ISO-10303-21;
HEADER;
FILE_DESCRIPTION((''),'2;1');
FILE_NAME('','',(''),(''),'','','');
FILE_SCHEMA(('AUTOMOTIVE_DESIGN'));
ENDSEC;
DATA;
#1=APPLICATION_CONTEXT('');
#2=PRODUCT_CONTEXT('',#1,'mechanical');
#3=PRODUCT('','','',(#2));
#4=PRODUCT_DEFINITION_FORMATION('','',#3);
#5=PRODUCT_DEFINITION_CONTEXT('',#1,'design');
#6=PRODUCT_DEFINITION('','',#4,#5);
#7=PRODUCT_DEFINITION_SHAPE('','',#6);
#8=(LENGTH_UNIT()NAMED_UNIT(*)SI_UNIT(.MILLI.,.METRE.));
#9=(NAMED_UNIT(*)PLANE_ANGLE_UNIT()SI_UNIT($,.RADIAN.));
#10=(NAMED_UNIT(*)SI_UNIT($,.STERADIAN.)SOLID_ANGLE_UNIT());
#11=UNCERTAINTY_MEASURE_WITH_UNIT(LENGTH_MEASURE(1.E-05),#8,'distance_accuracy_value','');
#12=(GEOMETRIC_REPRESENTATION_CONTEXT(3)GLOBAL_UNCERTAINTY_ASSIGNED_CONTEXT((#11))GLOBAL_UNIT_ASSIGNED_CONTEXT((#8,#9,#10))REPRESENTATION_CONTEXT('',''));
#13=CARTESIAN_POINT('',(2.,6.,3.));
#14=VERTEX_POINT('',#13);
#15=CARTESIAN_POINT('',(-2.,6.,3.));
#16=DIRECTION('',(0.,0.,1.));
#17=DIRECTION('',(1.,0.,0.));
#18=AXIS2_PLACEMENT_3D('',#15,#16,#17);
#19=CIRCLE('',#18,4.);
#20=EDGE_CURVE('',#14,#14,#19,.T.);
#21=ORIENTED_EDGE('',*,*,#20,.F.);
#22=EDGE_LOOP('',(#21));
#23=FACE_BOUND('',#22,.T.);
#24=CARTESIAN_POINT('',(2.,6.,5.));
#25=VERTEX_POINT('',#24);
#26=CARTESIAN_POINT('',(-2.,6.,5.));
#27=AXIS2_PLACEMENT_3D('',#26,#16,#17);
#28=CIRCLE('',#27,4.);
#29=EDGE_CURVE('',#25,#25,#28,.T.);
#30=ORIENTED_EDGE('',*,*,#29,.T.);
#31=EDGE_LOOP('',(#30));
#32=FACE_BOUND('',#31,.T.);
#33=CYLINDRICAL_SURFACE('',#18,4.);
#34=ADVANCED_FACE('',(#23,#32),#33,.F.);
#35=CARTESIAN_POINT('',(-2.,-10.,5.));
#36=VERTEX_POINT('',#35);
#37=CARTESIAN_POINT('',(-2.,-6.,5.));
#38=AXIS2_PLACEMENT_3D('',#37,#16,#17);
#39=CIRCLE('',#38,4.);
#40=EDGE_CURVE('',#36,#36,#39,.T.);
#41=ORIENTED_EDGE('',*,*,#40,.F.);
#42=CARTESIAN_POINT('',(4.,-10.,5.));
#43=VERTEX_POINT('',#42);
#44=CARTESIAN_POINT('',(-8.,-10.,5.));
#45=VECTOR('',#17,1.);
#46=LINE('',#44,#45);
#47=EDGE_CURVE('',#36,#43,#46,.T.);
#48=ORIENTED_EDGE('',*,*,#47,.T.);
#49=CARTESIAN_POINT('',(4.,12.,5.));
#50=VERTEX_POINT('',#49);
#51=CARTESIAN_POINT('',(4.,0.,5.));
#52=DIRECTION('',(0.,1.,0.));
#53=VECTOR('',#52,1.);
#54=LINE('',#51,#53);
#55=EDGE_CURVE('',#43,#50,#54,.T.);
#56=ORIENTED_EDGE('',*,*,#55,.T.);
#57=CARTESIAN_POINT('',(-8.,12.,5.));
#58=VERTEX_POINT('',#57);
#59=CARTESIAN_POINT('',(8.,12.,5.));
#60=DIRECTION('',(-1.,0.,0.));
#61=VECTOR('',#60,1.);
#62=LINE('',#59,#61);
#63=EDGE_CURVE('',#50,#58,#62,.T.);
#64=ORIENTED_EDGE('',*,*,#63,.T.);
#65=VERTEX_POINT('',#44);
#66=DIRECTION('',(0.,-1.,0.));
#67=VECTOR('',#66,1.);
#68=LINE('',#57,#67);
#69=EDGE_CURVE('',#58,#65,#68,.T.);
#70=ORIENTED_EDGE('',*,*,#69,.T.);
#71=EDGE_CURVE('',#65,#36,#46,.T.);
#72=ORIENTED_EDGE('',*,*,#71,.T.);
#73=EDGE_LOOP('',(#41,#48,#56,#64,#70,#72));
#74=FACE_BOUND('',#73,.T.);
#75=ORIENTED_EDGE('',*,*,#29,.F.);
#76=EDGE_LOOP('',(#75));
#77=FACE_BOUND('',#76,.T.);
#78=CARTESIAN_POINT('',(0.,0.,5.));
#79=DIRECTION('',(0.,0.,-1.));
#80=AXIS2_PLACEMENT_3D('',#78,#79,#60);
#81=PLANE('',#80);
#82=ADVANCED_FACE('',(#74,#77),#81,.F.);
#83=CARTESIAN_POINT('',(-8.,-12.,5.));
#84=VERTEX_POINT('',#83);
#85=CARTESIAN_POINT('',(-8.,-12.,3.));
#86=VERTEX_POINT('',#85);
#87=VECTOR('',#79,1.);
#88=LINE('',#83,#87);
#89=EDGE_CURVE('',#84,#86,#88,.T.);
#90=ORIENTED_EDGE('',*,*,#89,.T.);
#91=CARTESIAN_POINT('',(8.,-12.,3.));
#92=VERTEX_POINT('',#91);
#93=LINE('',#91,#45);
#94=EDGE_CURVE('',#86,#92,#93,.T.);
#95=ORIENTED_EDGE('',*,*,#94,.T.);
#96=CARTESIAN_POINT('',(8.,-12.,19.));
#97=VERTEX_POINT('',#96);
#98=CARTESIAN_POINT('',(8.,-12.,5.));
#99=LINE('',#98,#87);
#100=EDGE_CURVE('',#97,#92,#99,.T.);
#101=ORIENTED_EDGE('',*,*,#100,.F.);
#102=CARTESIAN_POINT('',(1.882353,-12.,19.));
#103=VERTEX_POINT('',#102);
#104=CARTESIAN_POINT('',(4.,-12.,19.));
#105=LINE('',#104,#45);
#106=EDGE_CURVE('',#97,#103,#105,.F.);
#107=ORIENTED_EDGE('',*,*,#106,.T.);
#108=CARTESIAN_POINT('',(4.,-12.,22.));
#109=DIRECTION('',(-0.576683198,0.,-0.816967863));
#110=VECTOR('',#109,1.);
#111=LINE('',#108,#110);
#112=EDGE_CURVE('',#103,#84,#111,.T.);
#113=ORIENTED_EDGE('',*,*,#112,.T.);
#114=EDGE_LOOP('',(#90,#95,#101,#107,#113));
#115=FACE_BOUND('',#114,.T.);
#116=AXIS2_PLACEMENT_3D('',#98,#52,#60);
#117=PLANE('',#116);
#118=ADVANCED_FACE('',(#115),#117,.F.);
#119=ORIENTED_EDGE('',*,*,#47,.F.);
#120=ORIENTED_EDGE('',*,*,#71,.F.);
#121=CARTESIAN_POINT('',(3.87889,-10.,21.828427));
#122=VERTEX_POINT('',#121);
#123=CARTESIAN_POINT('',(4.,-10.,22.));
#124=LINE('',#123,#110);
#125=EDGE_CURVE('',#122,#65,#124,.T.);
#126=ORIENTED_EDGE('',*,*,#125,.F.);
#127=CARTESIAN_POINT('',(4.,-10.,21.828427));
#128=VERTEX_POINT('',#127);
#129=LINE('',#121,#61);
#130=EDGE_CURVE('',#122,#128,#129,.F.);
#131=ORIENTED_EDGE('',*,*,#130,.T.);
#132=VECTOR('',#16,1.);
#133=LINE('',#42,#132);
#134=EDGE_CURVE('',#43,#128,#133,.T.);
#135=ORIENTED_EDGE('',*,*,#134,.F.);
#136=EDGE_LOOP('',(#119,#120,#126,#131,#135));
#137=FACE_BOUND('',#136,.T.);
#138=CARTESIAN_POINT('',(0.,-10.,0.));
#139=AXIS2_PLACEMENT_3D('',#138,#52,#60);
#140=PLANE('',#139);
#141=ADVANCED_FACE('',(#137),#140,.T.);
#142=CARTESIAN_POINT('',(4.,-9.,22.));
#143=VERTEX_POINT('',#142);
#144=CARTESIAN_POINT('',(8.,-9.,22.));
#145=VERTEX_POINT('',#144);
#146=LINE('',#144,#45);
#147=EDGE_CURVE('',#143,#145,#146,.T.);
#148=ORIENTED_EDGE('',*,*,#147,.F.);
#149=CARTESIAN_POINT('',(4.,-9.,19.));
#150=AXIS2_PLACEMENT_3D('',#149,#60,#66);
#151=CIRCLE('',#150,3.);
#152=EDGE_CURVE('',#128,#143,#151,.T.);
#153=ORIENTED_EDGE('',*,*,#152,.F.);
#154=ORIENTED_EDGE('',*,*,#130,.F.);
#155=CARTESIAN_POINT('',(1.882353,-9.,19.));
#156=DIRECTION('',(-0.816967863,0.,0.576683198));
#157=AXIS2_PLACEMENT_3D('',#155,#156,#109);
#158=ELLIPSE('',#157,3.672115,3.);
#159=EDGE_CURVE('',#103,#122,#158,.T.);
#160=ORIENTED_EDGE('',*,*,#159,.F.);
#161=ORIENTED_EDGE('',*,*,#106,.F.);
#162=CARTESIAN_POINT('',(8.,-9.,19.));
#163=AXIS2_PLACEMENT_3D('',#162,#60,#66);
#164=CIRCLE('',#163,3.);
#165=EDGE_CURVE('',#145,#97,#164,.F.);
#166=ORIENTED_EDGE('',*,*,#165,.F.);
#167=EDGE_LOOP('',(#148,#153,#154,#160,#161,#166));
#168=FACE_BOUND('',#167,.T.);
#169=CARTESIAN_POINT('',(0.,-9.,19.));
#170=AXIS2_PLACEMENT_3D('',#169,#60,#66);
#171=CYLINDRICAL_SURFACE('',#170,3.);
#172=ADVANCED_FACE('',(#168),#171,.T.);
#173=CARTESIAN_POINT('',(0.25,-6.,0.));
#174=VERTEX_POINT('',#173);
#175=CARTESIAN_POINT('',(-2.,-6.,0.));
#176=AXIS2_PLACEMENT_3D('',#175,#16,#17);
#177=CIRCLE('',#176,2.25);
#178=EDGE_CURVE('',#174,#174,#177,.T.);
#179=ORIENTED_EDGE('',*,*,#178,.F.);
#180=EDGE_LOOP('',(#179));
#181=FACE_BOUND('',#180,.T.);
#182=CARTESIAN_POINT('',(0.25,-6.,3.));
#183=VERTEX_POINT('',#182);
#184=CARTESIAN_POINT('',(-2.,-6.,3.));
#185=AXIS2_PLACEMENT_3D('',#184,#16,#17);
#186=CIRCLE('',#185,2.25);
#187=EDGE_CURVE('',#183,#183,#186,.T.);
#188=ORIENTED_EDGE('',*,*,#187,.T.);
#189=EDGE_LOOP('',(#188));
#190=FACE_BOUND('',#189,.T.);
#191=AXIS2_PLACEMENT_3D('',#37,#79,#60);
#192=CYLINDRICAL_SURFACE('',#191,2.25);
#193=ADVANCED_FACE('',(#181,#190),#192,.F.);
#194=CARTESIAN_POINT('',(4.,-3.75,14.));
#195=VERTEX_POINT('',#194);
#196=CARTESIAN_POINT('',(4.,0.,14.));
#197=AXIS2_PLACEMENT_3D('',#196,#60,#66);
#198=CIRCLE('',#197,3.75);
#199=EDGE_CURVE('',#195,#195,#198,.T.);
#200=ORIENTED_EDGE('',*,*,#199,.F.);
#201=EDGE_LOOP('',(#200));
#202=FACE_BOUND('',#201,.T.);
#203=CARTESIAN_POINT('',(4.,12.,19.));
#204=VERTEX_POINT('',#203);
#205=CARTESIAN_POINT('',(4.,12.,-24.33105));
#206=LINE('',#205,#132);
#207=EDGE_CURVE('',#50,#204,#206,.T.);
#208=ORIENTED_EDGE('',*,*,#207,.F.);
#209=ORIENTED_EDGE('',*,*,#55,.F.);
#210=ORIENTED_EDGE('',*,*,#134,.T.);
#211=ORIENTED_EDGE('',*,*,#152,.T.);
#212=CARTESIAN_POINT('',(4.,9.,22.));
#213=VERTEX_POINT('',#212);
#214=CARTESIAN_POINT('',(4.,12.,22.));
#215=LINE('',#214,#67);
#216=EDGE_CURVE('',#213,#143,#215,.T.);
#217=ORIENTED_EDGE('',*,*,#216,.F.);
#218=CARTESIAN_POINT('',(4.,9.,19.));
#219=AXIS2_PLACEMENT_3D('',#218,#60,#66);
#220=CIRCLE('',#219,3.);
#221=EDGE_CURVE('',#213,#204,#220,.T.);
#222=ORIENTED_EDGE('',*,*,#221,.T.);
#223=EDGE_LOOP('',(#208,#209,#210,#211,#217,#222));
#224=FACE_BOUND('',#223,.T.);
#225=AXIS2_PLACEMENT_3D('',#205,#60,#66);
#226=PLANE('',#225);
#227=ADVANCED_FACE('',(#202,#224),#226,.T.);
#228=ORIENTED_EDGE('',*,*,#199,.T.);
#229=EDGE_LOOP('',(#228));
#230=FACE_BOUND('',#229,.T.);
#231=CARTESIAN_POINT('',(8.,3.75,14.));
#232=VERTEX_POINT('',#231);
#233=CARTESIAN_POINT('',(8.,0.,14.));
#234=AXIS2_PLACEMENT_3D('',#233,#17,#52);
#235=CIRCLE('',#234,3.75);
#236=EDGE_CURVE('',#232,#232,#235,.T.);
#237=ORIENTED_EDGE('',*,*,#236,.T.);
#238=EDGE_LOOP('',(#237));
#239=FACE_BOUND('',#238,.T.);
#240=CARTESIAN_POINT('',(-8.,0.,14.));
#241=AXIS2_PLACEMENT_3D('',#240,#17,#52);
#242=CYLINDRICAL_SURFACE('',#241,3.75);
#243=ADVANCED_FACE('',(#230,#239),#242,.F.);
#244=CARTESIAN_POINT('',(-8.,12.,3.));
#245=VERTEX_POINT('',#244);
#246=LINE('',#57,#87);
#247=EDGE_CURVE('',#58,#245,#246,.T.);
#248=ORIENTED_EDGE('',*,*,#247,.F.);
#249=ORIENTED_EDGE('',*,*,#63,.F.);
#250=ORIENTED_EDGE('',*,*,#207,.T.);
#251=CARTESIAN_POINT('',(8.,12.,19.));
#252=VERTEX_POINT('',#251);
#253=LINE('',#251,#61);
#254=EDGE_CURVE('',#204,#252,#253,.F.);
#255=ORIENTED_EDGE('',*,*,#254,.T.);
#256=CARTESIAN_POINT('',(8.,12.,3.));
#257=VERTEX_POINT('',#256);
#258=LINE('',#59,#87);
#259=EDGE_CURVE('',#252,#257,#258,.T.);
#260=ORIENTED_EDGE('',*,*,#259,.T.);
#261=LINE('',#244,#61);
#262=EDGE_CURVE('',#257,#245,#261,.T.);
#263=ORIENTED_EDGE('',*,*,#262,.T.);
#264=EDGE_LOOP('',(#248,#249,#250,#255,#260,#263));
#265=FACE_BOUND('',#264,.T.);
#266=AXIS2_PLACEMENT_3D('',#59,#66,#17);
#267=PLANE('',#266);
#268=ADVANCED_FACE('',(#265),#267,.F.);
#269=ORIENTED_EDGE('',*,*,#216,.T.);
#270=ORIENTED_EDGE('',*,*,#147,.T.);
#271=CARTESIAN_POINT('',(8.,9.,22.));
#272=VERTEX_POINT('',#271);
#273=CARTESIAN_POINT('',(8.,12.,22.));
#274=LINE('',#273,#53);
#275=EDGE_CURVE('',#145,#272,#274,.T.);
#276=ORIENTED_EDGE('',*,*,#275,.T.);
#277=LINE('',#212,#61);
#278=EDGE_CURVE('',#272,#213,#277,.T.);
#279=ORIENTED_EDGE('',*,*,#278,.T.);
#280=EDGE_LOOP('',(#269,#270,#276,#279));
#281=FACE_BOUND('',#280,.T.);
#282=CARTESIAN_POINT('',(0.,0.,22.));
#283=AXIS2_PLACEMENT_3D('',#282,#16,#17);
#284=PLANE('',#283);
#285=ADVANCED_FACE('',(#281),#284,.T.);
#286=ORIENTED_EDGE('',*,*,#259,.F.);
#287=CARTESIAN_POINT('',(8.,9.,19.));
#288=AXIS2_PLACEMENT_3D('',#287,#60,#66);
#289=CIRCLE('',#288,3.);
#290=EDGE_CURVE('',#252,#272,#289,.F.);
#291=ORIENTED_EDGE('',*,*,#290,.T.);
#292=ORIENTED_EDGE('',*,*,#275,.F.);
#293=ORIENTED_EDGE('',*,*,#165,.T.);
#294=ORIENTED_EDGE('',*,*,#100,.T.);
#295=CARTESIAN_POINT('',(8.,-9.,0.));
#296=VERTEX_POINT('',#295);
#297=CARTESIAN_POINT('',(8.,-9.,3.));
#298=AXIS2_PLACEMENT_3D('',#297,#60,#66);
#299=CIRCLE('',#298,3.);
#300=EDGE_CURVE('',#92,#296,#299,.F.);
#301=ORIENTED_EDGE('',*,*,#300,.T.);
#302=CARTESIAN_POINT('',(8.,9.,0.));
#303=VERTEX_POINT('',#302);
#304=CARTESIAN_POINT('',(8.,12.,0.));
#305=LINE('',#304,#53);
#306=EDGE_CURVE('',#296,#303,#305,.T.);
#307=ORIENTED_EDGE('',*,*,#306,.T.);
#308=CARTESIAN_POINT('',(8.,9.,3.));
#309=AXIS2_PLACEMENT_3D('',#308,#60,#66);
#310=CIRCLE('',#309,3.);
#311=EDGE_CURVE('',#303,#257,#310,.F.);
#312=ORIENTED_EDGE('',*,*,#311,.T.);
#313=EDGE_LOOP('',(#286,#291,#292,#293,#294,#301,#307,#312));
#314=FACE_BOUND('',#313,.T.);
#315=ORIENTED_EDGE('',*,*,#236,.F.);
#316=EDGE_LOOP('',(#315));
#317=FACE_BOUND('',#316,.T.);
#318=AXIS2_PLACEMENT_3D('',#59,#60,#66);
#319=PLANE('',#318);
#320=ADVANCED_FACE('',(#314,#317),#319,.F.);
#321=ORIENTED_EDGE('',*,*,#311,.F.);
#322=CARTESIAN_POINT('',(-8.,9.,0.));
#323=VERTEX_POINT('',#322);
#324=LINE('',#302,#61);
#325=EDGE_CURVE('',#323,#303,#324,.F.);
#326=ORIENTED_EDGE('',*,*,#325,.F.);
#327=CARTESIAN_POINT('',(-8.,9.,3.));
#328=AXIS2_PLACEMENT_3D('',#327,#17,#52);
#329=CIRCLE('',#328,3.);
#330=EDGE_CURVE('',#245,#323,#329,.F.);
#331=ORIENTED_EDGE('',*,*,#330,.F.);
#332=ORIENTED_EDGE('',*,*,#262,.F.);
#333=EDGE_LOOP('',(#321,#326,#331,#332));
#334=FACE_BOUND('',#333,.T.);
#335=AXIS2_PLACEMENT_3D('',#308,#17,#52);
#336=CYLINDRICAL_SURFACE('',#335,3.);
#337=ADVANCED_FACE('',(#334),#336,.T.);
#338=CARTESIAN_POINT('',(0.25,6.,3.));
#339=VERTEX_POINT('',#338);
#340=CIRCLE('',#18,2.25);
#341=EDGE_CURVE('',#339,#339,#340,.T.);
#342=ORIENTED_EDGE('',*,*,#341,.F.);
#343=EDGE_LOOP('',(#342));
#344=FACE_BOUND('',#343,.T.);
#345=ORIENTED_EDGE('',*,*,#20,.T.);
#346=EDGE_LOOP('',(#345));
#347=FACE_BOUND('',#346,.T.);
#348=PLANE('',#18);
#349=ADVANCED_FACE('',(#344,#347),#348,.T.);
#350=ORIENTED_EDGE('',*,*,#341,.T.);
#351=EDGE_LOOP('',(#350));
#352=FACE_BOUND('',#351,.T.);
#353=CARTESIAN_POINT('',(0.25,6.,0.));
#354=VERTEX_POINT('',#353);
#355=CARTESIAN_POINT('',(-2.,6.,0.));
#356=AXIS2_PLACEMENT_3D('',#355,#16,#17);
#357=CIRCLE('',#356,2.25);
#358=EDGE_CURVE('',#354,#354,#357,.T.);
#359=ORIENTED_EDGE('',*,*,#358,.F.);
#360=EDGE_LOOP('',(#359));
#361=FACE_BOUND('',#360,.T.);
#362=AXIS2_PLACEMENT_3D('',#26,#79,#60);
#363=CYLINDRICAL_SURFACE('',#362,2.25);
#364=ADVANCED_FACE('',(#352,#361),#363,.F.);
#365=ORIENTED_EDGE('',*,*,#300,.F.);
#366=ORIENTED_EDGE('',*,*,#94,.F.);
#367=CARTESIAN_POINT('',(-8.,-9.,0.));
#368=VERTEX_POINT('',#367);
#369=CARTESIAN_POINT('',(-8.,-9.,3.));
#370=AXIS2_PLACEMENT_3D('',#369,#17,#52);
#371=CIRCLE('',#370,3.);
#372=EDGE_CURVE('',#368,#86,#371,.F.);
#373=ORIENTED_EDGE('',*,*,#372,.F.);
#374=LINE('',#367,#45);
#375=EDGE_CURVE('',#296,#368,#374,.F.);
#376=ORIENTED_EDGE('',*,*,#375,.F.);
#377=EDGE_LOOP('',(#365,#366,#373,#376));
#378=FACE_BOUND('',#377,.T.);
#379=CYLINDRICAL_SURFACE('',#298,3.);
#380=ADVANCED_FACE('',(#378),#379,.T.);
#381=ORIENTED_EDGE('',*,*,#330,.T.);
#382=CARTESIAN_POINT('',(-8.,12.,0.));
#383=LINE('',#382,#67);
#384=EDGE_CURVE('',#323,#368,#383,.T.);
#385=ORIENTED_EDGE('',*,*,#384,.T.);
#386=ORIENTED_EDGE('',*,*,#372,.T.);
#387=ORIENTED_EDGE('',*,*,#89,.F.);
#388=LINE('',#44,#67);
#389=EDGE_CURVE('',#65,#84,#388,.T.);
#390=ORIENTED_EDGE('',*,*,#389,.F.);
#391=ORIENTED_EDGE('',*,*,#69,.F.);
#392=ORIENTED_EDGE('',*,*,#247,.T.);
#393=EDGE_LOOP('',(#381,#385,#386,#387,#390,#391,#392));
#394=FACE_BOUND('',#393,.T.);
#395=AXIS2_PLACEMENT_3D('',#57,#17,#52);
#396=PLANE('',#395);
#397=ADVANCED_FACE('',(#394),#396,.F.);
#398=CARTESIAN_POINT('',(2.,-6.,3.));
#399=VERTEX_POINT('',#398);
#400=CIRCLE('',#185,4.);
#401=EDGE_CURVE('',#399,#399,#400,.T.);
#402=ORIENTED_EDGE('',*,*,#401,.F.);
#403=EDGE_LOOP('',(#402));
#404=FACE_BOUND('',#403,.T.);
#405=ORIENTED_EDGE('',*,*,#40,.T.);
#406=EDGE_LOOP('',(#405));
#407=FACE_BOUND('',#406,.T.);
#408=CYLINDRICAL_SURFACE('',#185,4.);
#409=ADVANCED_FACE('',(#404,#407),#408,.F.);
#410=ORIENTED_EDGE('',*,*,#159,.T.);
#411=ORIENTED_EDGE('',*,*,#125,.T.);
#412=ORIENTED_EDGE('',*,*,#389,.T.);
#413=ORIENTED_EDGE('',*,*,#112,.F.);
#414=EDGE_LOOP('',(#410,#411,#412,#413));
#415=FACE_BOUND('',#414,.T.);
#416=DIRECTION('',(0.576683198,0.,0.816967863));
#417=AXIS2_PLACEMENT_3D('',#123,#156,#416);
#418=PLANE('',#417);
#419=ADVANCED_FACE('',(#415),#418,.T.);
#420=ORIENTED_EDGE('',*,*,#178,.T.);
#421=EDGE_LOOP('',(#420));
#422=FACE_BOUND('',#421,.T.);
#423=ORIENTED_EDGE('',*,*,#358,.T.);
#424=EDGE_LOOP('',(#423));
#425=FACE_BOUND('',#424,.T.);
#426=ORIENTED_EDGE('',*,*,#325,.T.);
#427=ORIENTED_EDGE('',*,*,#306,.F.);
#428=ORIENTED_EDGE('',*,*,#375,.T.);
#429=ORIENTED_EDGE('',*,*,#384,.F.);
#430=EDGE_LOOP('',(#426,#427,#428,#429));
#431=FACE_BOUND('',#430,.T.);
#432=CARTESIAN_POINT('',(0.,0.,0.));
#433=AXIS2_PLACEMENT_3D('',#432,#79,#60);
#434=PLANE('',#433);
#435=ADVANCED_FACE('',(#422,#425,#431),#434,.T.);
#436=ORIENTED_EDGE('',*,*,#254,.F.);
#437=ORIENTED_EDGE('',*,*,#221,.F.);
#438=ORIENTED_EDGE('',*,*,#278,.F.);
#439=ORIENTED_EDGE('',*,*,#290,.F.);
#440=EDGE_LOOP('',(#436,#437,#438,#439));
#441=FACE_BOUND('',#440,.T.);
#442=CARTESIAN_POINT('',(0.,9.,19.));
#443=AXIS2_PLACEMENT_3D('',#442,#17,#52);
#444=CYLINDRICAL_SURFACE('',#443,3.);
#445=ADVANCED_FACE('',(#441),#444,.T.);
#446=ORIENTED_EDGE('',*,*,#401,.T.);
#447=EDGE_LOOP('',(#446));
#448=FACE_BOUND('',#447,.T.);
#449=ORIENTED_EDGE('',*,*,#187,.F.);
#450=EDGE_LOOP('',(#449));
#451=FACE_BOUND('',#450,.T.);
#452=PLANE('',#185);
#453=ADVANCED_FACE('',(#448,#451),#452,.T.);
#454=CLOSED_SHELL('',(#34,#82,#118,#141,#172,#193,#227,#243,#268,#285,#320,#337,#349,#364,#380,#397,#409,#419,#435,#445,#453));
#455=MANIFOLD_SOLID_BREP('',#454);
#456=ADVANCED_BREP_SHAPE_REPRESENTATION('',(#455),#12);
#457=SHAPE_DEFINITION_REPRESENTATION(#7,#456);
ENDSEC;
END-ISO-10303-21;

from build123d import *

# Parameters (mm, degrees)
SKETCH1_W                = 16
SKETCH1_H                = 24
SKETCH1_R                = 2.25
BOSS_EXTRUDE1_DEPTH      = 5
BOSS_EXTRUDE2_DEPTH      = 17
BOSS_EXTRUDE2_DEPTH_BACK = 5
SKETCH2_W                = 4
SKETCH2_H                = 24
SKETCH3_R                = 3.75
CUT_EXTRUDE1_DEPTH       = 30.732137495
BOSS_EXTRUDE3_DEPTH      = 2
FILLET1_R                = 3
SKETCH5_R                = 4
CUT_EXTRUDE2_DEPTH       = 2


with BuildPart() as part:
    # Sketch1 → Boss-Extrude1 (new body)
    with BuildSketch(Plane.XY):
        Rectangle(SKETCH1_W, SKETCH1_H)
        with Locations((-2, 6)):
            Circle(SKETCH1_R, mode=Mode.SUBTRACT)
        with Locations((-2, -6)):
            Circle(SKETCH1_R, mode=Mode.SUBTRACT)
    extrude(amount=BOSS_EXTRUDE1_DEPTH)

    # Sketch2 → Boss-Extrude2 (add, two sides: drawn at the far end of the back side and taken through both)
    with BuildSketch(Plane.XY.offset(5).offset(-BOSS_EXTRUDE2_DEPTH_BACK)):
        with Locations((6, 0)):
            Rectangle(SKETCH2_W, SKETCH2_H)
    extrude(amount=BOSS_EXTRUDE2_DEPTH + BOSS_EXTRUDE2_DEPTH_BACK)

    # Sketch3 → Cut-Extrude1 (cut, through all)
    with BuildSketch(Plane(origin=(8, 0, 0), x_dir=(0, 0, -1), z_dir=(1, 0, 0))):
        with Locations(Location((-14, 0, 0), (0, 0, 90))):
            Circle(SKETCH3_R)
    extrude(amount=-CUT_EXTRUDE1_DEPTH, mode=Mode.SUBTRACT)

    # Sketch4 → Boss-Extrude3 (add)
    with BuildSketch(Plane.XZ.offset(12)):
        Polygon((4, 22), (-8, 5), (4, 5), align=None)
    extrude(amount=-BOSS_EXTRUDE3_DEPTH)

    # Fillet1
    # the kernel refuses this fillet: 3 mm, written as the material it takes off along each edge
    with BuildSketch(Plane(origin=(15.5, -12, 22), x_dir=(0, 1, 0), z_dir=(-1, 0, 0))) as fillet1_piece_1:
        with BuildLine():
            CenterArc((FILLET1_R, FILLET1_R), FILLET1_R, 180, 90)
            Line((0, FILLET1_R), (0, 0))
            Line((0, 0), (FILLET1_R, 0))
        make_face()
    extrude(amount=19, mode=Mode.SUBTRACT)
    with BuildSketch(Plane(origin=(-3.5, 12, 22), x_dir=(0, 0, -1), z_dir=(1, 0, 0))) as fillet1_piece_2:
        with BuildLine():
            CenterArc((FILLET1_R, -FILLET1_R), FILLET1_R, 90, 90)
            Line((0, -FILLET1_R), (0, 0))
            Line((0, 0), (FILLET1_R, 0))
        make_face()
    extrude(amount=19, mode=Mode.SUBTRACT)
    with BuildSketch(Plane(origin=(15.5, -12, 0), x_dir=(0, 1, 0), z_dir=(-1, 0, 0)), Plane(origin=(15.5, 12, 0), x_dir=(0, 0, 1), z_dir=(-1, 0, 0))) as fillet1_piece_3:
        with BuildLine():
            CenterArc((FILLET1_R, -FILLET1_R), FILLET1_R, 90, 90)
            Line((0, -FILLET1_R), (0, 0))
            Line((0, 0), (FILLET1_R, 0))
        make_face()
    extrude(amount=31, mode=Mode.SUBTRACT)

    # Sketch5 → Cut-Extrude2 (cut)
    with BuildSketch(Plane.XY.offset(5)):
        with Locations((-2, 6)):
            Circle(SKETCH5_R)
        with Locations((-2, -6)):
            Circle(SKETCH5_R)
    extrude(amount=-CUT_EXTRUDE2_DEPTH, mode=Mode.SUBTRACT)


solid = part.part
